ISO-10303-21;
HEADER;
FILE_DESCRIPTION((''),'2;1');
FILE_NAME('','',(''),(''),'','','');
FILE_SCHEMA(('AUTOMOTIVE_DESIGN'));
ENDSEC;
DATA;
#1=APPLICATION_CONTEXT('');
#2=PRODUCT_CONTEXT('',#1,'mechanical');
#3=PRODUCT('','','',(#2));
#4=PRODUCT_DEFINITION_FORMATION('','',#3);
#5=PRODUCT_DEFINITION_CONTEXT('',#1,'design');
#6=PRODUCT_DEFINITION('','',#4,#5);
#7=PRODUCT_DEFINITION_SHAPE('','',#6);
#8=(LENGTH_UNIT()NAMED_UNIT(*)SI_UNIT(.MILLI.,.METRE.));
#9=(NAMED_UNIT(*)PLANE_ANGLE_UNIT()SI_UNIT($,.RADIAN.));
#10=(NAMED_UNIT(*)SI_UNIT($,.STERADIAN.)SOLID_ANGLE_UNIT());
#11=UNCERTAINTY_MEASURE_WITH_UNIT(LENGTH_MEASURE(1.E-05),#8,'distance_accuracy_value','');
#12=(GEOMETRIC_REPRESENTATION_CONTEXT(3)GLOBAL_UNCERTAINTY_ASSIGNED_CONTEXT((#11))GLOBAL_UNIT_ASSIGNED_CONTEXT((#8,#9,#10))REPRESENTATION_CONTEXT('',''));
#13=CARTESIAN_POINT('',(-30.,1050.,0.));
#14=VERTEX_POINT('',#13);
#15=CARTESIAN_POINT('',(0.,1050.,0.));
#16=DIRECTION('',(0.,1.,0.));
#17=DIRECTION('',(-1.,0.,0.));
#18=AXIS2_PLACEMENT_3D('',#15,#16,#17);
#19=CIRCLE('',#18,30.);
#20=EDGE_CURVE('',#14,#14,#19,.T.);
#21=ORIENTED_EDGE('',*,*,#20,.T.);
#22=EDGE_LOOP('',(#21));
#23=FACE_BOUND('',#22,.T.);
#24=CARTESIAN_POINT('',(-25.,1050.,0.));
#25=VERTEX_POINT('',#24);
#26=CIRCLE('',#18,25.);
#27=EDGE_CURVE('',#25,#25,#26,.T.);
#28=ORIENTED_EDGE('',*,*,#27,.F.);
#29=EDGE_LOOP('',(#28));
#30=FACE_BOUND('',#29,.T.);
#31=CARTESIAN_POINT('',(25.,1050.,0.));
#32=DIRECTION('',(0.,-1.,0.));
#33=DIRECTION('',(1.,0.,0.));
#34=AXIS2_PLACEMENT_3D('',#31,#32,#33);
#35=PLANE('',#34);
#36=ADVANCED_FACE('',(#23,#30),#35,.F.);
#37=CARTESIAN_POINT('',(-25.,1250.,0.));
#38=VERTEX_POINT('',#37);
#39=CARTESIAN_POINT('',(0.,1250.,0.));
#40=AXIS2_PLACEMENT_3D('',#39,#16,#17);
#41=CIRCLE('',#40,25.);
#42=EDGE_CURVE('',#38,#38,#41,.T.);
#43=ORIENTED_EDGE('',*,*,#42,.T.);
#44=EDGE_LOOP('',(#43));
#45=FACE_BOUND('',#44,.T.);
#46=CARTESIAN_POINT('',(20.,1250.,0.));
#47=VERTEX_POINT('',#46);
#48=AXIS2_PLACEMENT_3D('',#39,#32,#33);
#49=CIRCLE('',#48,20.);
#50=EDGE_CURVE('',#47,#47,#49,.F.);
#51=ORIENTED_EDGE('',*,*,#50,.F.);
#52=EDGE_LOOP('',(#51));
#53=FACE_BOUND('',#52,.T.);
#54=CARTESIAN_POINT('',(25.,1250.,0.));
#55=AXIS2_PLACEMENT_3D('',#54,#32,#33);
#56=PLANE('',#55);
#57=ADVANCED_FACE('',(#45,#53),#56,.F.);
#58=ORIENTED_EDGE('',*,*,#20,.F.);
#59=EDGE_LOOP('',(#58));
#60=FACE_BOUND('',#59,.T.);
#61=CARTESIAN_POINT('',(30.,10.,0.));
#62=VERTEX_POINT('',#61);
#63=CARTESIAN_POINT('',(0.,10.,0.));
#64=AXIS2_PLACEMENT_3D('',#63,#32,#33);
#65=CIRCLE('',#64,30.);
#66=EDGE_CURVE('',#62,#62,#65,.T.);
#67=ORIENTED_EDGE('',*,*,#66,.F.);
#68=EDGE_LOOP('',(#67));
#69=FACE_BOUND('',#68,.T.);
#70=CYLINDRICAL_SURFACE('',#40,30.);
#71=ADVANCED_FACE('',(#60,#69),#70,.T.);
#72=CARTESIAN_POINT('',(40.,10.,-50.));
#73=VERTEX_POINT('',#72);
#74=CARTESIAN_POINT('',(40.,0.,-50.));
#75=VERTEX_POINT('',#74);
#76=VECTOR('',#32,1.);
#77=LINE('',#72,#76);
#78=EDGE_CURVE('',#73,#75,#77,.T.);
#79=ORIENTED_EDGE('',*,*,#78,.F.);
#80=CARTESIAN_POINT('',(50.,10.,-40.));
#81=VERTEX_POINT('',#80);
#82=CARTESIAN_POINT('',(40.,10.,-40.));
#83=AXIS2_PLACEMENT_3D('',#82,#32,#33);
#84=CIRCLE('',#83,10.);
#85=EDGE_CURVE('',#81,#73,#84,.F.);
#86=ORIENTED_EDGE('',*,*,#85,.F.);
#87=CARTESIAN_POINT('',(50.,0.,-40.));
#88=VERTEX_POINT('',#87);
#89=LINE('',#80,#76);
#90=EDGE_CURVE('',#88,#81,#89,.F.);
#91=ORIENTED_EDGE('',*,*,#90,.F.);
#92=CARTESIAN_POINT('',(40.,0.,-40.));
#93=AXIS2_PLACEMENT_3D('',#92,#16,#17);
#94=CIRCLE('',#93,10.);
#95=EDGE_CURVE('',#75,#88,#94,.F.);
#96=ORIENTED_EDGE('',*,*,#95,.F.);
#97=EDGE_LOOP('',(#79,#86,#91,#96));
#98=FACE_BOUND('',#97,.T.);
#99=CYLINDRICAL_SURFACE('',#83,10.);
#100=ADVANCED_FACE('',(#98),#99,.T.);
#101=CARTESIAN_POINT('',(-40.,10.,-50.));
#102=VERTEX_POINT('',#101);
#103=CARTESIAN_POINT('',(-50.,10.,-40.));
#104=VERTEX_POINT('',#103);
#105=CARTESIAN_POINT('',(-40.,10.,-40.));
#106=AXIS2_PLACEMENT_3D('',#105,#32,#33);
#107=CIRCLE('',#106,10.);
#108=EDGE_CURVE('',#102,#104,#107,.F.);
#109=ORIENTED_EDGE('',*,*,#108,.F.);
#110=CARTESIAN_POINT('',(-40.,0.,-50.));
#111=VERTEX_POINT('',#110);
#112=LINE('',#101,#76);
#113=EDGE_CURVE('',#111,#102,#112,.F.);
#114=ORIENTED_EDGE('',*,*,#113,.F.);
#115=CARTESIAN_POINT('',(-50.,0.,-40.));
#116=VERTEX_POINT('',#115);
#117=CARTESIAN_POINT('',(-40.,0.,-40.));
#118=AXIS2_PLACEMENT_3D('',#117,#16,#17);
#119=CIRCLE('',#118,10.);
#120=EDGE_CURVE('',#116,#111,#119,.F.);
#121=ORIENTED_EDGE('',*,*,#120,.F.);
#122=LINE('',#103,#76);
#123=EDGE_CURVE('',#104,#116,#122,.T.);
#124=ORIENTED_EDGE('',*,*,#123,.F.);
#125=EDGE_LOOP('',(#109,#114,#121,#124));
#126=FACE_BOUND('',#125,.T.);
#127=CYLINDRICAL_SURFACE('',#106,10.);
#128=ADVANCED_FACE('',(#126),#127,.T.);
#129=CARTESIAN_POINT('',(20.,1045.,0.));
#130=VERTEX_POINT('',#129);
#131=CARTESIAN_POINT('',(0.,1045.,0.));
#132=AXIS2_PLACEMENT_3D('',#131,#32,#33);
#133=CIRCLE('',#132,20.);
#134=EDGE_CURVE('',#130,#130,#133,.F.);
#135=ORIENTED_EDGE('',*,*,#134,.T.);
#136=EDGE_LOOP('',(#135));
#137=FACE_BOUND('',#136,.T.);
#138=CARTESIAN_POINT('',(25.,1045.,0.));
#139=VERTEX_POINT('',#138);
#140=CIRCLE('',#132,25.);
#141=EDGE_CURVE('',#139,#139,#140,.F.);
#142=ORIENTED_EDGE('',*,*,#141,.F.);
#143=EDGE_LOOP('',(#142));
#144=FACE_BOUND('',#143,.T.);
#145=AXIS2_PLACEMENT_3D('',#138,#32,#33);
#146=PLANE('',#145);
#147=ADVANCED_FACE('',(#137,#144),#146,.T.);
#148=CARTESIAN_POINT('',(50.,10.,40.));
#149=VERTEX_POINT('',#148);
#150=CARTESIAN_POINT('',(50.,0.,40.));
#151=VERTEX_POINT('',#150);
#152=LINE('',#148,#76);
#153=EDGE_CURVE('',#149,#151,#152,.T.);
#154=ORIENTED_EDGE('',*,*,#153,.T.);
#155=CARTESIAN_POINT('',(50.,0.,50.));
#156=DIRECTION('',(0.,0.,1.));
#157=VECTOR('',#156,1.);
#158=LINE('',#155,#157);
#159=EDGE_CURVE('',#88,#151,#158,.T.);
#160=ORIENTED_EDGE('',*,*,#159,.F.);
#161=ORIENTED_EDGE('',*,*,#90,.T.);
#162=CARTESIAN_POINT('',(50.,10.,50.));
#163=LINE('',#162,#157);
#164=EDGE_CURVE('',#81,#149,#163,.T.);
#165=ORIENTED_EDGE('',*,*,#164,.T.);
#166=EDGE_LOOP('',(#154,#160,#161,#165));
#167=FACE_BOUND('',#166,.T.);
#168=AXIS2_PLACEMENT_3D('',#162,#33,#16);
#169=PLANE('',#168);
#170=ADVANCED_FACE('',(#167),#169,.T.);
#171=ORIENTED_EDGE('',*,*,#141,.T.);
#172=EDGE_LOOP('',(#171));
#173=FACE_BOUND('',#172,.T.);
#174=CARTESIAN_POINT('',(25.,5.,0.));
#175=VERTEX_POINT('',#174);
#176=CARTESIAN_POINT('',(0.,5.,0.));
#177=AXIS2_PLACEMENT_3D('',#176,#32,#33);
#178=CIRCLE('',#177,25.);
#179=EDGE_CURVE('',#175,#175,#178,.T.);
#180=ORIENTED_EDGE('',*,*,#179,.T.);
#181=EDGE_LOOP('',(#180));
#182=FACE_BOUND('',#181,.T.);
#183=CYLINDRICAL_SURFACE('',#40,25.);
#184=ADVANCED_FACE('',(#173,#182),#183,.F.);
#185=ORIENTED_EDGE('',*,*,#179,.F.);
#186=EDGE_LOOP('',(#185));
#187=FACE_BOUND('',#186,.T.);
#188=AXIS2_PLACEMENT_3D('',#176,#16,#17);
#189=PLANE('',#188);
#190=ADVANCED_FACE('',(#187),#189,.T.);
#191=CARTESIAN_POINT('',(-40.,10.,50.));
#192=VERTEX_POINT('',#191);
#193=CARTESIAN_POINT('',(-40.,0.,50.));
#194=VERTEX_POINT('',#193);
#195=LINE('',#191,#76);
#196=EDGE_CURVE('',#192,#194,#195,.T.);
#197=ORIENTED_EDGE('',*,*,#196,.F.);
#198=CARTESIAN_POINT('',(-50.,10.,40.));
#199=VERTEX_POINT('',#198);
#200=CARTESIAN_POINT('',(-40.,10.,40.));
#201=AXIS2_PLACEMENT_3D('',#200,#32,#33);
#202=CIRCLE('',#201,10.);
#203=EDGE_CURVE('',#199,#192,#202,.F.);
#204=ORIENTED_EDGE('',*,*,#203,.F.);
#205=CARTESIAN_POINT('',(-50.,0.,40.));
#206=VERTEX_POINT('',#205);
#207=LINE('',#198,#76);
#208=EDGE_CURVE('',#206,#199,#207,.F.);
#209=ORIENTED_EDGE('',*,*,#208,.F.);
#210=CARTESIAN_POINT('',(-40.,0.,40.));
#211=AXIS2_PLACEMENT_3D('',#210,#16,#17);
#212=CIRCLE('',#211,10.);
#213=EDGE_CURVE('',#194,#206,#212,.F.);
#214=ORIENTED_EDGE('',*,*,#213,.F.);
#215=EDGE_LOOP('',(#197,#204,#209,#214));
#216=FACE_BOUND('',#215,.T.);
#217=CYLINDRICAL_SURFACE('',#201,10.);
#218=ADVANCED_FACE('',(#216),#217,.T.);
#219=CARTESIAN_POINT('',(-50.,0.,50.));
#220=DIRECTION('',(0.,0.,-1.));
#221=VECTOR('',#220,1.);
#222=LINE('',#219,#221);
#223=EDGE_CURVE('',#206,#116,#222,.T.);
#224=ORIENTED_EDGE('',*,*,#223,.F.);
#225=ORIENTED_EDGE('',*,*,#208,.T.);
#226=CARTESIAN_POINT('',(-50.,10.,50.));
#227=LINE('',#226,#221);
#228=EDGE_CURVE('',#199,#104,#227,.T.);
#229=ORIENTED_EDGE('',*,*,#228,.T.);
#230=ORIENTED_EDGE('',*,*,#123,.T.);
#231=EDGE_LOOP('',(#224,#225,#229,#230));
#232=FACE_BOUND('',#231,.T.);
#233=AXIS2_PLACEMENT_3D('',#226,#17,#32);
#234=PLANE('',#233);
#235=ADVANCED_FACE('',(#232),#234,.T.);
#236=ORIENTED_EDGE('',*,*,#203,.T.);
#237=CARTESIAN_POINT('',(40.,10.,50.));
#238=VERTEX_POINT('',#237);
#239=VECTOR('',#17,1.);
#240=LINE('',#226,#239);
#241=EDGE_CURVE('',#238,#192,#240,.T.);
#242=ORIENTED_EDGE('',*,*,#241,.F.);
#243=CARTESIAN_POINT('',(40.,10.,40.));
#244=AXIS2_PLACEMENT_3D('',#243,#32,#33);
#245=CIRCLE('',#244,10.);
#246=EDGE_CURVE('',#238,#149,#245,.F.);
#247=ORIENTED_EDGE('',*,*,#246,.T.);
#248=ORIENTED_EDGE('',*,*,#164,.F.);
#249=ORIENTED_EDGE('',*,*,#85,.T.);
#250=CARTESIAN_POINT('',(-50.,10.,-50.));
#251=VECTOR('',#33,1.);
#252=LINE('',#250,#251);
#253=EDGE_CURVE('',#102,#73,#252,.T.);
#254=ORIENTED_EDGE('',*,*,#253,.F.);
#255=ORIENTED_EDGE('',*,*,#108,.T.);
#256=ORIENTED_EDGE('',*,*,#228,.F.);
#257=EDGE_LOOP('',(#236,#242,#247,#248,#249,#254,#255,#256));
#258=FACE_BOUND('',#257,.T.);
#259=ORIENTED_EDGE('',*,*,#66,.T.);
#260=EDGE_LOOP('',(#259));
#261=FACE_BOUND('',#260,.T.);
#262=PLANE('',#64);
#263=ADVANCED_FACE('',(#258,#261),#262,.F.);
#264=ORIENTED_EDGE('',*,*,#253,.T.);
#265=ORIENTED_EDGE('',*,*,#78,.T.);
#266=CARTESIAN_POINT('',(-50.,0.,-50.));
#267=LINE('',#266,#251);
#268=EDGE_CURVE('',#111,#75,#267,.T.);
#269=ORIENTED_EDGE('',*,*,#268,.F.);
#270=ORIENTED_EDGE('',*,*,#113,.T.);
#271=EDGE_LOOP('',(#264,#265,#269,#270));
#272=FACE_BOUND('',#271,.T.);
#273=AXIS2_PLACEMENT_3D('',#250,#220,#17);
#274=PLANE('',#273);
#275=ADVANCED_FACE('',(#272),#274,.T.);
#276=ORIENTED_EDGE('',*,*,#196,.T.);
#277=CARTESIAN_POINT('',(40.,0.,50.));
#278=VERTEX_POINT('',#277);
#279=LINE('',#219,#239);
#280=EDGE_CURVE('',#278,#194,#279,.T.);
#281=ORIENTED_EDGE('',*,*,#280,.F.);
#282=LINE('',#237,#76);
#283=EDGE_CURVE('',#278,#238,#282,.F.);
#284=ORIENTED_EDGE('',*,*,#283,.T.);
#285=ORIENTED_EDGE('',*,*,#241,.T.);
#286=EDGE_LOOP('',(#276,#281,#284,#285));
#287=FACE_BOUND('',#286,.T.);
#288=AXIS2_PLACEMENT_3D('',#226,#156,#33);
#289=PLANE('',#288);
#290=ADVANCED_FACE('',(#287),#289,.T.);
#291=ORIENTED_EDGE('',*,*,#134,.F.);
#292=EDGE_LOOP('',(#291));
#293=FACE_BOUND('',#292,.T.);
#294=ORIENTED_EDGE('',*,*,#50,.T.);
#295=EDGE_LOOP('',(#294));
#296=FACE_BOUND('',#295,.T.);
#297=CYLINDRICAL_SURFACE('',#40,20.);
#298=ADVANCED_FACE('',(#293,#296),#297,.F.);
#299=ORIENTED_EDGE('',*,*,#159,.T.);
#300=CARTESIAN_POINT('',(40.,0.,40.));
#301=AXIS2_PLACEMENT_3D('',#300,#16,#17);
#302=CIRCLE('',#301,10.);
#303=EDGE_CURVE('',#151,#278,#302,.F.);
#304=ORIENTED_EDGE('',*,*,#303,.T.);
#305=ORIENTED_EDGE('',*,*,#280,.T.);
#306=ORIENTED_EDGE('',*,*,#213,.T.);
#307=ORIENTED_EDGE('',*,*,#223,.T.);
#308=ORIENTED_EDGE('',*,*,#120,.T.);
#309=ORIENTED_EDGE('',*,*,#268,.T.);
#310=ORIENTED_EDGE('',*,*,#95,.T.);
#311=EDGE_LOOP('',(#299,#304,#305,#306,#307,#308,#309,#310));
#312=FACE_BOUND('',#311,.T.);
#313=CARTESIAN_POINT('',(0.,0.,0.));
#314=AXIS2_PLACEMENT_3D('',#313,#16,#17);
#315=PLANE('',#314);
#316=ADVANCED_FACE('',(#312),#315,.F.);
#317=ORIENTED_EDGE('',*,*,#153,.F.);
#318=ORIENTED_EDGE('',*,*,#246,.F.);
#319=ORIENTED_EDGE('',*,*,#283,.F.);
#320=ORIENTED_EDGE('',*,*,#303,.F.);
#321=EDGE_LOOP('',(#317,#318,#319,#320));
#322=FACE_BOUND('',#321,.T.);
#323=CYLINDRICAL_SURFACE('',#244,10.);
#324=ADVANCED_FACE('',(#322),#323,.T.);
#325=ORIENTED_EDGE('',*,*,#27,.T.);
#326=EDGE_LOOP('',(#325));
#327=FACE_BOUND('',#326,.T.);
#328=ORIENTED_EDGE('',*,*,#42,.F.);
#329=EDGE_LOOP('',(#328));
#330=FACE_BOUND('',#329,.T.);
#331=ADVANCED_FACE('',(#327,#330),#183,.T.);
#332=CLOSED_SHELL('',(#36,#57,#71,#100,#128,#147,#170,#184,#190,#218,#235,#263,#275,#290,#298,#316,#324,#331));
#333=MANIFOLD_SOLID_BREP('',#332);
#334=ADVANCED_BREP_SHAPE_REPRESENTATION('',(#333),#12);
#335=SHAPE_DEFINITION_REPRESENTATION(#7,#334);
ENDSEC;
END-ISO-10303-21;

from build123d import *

# Parameters (mm, degrees)
SKETCH_2_W          = 100
SKETCH_2_H          = 100
EXTRUDE_1_DEPTH     = 10
FILLET_1_R          = 10
SHELL_START         = 5
SHELL_1_OUTLINE_R   = 25
SHELL_1_DEPTH       = 1040
SHELL_START_2       = 1045
SHELL_1_2_OUTLINE_R = 20
SHELL_1_2_DEPTH     = 205


# Read off the part's stored shape, not the designer's step: 抽壳1
with BuildPart() as part:
    # 草图1 → 旋转1 (revolve)
    with BuildSketch(Plane.XY, mode=Mode.PRIVATE) as revolve_1_sk:
        Polygon((0, 0), (30, 0), (30, 1050), (25, 1050), (25, 1250), (0, 1250), align=None)
    revolve(revolve_1_sk.sketch.rotate(Axis((0, 1250, 0), (0, -1, 0)), 180), axis=Axis((0, 1250, 0), (0, -1, 0)))

    # 草图2 → 凸台-拉伸1 (add)
    with BuildSketch(Plane.XZ):
        Rectangle(SKETCH_2_W, SKETCH_2_H)
    extrude(amount=-EXTRUDE_1_DEPTH)

    # 圆角1
    fillet_1_edges = [part.edges().sort_by_distance(p)[0] for p in [
        (50, 5, 50),
        (50, 5, -50),
        (-50, 5, -50),
        (-50, 5, 50),
    ]]
    fillet(fillet_1_edges, radius=FILLET_1_R)

    # 抽壳1 outline → 抽壳1 (cut)
    with BuildSketch(Plane(origin=(0, 0, 0), x_dir=(1, 0, 0), z_dir=(0, 1, 0)).offset(SHELL_START)):
        Circle(SHELL_1_OUTLINE_R)
    extrude(amount=SHELL_1_DEPTH, mode=Mode.SUBTRACT)

    # Shell 1 2 outline → Shell 1 2 (cut)
    with BuildSketch(Plane(origin=(0, 0, 0), x_dir=(1, 0, 0), z_dir=(0, 1, 0)).offset(SHELL_START_2)):
        Circle(SHELL_1_2_OUTLINE_R)
    extrude(amount=SHELL_1_2_DEPTH, mode=Mode.SUBTRACT)


solid = part.part
